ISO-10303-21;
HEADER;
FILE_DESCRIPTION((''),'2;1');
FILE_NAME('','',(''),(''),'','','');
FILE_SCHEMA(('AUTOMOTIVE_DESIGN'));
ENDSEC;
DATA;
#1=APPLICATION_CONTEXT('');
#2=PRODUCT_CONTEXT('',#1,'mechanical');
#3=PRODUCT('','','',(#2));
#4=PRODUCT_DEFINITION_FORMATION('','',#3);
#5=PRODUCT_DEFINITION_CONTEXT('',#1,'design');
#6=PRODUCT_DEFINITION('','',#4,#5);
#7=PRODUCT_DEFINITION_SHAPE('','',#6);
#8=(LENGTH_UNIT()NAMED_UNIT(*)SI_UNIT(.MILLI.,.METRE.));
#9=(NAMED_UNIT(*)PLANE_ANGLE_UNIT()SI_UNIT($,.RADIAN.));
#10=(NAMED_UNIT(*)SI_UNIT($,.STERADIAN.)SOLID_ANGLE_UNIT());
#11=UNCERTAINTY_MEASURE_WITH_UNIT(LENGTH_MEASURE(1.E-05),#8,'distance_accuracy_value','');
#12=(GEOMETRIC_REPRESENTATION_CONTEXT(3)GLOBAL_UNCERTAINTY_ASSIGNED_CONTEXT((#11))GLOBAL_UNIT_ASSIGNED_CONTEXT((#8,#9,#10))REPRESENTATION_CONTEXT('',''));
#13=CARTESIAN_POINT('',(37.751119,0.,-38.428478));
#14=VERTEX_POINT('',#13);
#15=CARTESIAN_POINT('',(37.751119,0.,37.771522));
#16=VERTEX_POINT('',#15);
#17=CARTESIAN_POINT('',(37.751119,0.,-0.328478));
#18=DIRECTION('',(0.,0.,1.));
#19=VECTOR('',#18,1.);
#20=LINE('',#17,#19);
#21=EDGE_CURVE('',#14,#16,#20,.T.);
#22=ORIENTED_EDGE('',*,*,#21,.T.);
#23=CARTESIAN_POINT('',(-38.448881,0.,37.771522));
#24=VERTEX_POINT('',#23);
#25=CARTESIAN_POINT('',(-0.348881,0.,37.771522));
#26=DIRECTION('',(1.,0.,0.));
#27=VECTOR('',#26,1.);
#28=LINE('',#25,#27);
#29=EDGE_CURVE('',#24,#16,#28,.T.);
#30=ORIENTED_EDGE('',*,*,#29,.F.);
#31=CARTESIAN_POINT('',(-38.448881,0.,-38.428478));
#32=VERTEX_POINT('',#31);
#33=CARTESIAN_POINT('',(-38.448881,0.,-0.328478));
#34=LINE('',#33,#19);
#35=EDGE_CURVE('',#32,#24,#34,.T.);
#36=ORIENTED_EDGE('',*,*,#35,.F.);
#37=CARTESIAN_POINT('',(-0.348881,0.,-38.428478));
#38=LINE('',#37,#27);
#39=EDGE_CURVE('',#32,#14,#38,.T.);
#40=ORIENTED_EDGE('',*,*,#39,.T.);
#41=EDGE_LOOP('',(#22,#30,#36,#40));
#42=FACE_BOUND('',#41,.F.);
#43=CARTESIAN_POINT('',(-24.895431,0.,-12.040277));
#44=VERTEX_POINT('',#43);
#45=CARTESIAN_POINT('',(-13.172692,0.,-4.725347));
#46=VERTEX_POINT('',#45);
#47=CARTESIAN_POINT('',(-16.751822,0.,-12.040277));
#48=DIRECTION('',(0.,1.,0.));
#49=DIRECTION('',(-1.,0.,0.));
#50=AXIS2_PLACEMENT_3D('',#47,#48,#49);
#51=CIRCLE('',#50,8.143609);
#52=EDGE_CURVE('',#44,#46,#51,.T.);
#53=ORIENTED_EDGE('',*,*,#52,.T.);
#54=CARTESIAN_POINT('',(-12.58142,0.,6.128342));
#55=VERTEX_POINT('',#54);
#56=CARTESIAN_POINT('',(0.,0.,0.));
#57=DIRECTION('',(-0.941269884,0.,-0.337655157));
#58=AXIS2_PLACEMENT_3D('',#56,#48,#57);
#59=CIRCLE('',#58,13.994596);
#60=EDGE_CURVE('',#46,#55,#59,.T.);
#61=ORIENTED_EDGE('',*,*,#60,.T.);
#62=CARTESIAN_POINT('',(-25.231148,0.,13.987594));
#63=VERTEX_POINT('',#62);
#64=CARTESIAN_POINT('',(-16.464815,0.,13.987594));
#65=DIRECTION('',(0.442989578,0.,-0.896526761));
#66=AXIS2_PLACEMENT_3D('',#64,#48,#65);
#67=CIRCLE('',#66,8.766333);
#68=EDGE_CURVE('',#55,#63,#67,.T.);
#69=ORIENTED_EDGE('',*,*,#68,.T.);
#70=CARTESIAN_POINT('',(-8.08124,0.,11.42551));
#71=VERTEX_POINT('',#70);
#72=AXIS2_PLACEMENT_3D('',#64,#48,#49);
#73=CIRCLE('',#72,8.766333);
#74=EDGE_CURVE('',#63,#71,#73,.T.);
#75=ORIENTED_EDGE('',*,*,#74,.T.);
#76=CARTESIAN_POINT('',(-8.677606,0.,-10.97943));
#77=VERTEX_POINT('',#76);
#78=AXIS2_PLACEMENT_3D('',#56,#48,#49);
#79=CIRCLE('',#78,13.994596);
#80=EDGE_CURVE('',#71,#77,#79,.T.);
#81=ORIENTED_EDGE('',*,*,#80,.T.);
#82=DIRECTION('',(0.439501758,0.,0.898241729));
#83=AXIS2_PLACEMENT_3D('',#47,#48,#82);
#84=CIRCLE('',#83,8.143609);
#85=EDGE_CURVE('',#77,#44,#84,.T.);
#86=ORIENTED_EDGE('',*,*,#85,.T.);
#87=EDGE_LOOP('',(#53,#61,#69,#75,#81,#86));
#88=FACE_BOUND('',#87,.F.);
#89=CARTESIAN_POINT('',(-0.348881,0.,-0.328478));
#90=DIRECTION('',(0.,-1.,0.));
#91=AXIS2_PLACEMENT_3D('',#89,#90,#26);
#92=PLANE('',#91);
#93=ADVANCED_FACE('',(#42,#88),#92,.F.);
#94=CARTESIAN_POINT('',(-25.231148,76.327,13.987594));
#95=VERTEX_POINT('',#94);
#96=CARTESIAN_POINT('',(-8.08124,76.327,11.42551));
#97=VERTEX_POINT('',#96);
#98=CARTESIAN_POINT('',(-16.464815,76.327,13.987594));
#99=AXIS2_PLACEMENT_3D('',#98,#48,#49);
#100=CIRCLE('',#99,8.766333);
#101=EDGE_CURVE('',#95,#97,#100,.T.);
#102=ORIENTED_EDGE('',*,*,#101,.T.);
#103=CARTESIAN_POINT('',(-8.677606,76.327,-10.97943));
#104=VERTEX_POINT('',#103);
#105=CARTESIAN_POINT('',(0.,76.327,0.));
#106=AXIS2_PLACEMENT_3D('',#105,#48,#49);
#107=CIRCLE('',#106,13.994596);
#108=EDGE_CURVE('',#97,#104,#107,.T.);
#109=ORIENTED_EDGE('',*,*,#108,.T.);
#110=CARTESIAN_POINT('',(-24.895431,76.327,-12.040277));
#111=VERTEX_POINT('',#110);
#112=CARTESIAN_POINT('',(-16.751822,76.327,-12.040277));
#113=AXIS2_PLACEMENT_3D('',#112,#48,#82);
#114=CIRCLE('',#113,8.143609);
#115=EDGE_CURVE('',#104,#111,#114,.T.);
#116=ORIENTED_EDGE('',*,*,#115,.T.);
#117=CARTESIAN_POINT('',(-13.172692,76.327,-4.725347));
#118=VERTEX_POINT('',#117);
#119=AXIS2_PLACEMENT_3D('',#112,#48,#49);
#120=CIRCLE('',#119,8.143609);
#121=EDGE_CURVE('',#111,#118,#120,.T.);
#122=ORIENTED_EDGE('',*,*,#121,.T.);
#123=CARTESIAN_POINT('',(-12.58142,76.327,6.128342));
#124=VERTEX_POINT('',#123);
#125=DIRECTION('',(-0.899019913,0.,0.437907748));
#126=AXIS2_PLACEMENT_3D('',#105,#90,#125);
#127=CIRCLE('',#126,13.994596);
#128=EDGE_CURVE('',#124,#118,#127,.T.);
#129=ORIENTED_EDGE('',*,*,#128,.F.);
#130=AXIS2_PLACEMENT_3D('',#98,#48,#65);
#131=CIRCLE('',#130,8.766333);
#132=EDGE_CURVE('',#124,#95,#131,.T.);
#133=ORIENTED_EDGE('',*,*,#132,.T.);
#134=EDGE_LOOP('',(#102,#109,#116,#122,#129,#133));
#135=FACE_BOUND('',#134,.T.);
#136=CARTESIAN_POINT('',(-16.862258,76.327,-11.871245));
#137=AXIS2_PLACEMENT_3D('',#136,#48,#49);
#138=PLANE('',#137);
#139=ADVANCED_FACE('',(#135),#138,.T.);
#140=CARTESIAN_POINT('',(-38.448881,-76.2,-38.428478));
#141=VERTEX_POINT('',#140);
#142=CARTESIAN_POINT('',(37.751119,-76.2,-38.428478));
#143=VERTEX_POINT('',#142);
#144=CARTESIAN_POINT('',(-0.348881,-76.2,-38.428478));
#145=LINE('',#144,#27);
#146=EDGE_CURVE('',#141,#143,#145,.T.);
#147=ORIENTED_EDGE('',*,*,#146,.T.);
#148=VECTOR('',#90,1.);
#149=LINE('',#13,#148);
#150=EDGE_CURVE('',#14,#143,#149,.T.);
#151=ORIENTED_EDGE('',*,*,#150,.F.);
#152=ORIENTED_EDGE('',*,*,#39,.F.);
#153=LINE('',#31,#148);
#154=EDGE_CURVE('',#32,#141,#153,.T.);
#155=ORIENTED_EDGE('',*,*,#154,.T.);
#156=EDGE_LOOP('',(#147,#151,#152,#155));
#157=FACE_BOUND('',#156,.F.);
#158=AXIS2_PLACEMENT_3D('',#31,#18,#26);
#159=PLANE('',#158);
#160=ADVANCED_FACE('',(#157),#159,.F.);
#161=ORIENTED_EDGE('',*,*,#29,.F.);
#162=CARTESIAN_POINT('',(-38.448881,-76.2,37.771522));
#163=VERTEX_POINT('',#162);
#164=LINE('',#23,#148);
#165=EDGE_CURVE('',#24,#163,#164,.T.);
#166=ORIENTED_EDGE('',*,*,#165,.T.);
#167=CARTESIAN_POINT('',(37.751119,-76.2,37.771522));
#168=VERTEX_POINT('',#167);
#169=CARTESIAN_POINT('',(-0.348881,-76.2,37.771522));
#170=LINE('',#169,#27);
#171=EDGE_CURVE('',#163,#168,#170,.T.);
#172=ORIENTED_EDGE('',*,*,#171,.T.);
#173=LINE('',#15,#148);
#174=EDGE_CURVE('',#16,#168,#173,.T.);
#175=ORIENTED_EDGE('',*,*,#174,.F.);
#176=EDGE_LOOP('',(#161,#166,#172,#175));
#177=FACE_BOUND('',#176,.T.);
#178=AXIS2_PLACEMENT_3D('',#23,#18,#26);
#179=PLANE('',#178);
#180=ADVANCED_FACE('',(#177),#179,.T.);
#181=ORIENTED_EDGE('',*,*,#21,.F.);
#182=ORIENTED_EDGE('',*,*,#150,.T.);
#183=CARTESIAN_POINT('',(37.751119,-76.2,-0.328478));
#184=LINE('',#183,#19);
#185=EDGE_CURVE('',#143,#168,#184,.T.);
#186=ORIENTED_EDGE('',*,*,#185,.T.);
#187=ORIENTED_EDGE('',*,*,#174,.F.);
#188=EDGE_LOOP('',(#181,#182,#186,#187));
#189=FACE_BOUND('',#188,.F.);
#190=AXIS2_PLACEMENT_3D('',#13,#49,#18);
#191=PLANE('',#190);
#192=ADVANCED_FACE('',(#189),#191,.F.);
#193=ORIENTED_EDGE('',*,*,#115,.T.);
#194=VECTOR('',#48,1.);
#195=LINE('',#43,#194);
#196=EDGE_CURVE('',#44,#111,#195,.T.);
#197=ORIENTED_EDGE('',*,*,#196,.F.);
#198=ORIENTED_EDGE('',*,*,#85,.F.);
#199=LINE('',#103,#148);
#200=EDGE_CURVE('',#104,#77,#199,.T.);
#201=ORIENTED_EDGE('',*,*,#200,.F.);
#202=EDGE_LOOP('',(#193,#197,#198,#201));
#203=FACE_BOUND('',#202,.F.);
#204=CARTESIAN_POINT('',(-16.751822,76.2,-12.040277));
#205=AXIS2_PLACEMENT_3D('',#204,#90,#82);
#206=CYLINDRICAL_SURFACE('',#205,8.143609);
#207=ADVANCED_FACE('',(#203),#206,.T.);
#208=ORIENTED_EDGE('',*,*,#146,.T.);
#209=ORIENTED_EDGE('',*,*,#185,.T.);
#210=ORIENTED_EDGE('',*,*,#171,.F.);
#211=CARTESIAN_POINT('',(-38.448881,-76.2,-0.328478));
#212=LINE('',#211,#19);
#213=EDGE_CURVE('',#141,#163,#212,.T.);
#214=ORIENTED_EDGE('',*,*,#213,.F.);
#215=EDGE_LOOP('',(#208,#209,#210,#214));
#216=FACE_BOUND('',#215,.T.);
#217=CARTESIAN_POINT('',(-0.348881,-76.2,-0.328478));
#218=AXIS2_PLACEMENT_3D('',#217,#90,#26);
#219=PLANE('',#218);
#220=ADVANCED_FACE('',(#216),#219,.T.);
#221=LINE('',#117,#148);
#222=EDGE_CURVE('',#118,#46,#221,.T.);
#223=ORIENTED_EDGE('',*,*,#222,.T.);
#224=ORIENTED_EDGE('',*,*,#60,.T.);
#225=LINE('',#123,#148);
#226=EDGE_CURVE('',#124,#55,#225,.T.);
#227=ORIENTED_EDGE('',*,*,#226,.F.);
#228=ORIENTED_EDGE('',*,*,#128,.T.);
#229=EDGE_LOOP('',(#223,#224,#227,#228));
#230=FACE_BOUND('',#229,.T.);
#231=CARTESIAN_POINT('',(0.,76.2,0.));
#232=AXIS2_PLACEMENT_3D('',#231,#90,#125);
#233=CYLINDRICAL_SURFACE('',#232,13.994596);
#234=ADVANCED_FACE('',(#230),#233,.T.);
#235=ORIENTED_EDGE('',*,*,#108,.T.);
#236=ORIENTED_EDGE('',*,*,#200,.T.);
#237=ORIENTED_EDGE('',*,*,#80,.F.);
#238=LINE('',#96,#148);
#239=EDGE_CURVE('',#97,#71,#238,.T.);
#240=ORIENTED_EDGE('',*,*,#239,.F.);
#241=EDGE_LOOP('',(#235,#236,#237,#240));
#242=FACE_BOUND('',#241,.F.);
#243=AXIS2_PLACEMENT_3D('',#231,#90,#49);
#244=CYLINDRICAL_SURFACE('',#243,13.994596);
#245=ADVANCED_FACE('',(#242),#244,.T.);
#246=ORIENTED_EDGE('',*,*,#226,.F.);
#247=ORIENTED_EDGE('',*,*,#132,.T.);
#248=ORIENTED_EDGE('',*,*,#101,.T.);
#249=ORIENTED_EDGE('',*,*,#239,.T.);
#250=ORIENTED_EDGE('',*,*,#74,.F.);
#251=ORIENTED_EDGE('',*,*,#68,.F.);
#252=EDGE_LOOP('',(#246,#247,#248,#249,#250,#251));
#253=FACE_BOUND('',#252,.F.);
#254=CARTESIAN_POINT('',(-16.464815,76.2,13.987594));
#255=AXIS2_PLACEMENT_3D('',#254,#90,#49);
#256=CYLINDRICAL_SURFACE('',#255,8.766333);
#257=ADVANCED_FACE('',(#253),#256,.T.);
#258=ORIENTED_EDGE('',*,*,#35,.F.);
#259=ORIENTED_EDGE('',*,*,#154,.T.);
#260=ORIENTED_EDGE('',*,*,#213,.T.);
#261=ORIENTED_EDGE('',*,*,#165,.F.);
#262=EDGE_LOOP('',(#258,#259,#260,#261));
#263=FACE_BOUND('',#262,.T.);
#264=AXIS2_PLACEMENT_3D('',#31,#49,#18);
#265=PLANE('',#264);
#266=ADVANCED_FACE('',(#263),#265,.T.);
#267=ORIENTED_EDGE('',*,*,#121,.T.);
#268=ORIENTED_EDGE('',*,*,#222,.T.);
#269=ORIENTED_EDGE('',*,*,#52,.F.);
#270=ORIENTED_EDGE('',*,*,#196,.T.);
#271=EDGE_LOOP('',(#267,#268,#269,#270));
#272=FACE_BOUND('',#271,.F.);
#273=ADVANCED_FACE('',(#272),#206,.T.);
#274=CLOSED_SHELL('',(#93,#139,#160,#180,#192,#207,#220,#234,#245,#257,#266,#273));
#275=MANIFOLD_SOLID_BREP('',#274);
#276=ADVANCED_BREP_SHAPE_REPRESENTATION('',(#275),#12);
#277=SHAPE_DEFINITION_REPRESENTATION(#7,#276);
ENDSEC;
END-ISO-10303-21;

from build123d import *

# Parameters (mm, degrees)
F0_W     = 76.2
F0_H     = 76.2
F1_DEPTH = 76.2
F2_R     = 13.9945957695
F3_DEPTH = 76.2
F5_DEPTH = 76.2
F6_DEPTH = 0.127


# Not quite as in the source:
# - a feature of the source that left no trace in its solid (it failed there, or was rolled back) is left out


with BuildPart() as f1:
    # F0 (on Front) → F1 (new body)
    with BuildSketch(Plane.XZ):
        with Locations((-0.348880887, -0.3284779671)):
            Rectangle(F0_W, F0_H)
    extrude(amount=F1_DEPTH)

    # F2 (on face) → F3 (join)
    with BuildSketch(Plane(origin=(0, 0, 0), x_dir=(-1, 0, 0), z_dir=(0, 1, 0))):
        Circle(F2_R)
    extrude(amount=F3_DEPTH)

    # F4 (on face) → F5 (join)
    with BuildSketch(Plane(origin=(0, 0, 0), x_dir=(-1, 0, 0), z_dir=(0, 1, 0))):
        with BuildLine():
            ThreePointArc((12.5814202737, 6.1283419167), (21.0911235736, 6.5413963555), (25.2311478041, 13.9875942841))
            ThreePointArc((25.2311478041, 13.9875942841), (15.1695556684, 22.6577098126), (8.081240073, 11.4255096006))
            ThreePointArc((8.081240073, 11.4255096006), (10.6654291765, 9.0607577626), (12.5814202737, 6.1283419167))
        make_face()
        with BuildLine():
            ThreePointArc((13.1726915392, -4.7253474332), (11.363857458, -8.1677080277), (8.6776055388, -10.9794295328))
            ThreePointArc((8.6776055388, -10.9794295328), (16.220264771, -20.1665195025), (24.895431247, -12.0402770117))
            ThreePointArc((24.895431247, -12.0402770117), (21.0629315641, -5.1313910488), (13.1726915392, -4.7253474332))
        make_face()
        with BuildLine():
            ThreePointArc((13.1726915392, -4.7253474332), (10.1390684725, -7.2873978983), (8.6776055388, -10.9794295328))
            ThreePointArc((8.6776055388, -10.9794295328), (11.363857458, -8.1677080277), (13.1726915392, -4.7253474332))
        make_face()
    extrude(amount=F5_DEPTH)

    # F6 (add): a face of the model
    f6_faces = [f1.faces().sort_by_distance(p)[0] for p in [
        (-6.9646133447, 76.2, 0.8386205015),
    ]]
    extrude(f6_faces, amount=F6_DEPTH)


solid = f1.part
